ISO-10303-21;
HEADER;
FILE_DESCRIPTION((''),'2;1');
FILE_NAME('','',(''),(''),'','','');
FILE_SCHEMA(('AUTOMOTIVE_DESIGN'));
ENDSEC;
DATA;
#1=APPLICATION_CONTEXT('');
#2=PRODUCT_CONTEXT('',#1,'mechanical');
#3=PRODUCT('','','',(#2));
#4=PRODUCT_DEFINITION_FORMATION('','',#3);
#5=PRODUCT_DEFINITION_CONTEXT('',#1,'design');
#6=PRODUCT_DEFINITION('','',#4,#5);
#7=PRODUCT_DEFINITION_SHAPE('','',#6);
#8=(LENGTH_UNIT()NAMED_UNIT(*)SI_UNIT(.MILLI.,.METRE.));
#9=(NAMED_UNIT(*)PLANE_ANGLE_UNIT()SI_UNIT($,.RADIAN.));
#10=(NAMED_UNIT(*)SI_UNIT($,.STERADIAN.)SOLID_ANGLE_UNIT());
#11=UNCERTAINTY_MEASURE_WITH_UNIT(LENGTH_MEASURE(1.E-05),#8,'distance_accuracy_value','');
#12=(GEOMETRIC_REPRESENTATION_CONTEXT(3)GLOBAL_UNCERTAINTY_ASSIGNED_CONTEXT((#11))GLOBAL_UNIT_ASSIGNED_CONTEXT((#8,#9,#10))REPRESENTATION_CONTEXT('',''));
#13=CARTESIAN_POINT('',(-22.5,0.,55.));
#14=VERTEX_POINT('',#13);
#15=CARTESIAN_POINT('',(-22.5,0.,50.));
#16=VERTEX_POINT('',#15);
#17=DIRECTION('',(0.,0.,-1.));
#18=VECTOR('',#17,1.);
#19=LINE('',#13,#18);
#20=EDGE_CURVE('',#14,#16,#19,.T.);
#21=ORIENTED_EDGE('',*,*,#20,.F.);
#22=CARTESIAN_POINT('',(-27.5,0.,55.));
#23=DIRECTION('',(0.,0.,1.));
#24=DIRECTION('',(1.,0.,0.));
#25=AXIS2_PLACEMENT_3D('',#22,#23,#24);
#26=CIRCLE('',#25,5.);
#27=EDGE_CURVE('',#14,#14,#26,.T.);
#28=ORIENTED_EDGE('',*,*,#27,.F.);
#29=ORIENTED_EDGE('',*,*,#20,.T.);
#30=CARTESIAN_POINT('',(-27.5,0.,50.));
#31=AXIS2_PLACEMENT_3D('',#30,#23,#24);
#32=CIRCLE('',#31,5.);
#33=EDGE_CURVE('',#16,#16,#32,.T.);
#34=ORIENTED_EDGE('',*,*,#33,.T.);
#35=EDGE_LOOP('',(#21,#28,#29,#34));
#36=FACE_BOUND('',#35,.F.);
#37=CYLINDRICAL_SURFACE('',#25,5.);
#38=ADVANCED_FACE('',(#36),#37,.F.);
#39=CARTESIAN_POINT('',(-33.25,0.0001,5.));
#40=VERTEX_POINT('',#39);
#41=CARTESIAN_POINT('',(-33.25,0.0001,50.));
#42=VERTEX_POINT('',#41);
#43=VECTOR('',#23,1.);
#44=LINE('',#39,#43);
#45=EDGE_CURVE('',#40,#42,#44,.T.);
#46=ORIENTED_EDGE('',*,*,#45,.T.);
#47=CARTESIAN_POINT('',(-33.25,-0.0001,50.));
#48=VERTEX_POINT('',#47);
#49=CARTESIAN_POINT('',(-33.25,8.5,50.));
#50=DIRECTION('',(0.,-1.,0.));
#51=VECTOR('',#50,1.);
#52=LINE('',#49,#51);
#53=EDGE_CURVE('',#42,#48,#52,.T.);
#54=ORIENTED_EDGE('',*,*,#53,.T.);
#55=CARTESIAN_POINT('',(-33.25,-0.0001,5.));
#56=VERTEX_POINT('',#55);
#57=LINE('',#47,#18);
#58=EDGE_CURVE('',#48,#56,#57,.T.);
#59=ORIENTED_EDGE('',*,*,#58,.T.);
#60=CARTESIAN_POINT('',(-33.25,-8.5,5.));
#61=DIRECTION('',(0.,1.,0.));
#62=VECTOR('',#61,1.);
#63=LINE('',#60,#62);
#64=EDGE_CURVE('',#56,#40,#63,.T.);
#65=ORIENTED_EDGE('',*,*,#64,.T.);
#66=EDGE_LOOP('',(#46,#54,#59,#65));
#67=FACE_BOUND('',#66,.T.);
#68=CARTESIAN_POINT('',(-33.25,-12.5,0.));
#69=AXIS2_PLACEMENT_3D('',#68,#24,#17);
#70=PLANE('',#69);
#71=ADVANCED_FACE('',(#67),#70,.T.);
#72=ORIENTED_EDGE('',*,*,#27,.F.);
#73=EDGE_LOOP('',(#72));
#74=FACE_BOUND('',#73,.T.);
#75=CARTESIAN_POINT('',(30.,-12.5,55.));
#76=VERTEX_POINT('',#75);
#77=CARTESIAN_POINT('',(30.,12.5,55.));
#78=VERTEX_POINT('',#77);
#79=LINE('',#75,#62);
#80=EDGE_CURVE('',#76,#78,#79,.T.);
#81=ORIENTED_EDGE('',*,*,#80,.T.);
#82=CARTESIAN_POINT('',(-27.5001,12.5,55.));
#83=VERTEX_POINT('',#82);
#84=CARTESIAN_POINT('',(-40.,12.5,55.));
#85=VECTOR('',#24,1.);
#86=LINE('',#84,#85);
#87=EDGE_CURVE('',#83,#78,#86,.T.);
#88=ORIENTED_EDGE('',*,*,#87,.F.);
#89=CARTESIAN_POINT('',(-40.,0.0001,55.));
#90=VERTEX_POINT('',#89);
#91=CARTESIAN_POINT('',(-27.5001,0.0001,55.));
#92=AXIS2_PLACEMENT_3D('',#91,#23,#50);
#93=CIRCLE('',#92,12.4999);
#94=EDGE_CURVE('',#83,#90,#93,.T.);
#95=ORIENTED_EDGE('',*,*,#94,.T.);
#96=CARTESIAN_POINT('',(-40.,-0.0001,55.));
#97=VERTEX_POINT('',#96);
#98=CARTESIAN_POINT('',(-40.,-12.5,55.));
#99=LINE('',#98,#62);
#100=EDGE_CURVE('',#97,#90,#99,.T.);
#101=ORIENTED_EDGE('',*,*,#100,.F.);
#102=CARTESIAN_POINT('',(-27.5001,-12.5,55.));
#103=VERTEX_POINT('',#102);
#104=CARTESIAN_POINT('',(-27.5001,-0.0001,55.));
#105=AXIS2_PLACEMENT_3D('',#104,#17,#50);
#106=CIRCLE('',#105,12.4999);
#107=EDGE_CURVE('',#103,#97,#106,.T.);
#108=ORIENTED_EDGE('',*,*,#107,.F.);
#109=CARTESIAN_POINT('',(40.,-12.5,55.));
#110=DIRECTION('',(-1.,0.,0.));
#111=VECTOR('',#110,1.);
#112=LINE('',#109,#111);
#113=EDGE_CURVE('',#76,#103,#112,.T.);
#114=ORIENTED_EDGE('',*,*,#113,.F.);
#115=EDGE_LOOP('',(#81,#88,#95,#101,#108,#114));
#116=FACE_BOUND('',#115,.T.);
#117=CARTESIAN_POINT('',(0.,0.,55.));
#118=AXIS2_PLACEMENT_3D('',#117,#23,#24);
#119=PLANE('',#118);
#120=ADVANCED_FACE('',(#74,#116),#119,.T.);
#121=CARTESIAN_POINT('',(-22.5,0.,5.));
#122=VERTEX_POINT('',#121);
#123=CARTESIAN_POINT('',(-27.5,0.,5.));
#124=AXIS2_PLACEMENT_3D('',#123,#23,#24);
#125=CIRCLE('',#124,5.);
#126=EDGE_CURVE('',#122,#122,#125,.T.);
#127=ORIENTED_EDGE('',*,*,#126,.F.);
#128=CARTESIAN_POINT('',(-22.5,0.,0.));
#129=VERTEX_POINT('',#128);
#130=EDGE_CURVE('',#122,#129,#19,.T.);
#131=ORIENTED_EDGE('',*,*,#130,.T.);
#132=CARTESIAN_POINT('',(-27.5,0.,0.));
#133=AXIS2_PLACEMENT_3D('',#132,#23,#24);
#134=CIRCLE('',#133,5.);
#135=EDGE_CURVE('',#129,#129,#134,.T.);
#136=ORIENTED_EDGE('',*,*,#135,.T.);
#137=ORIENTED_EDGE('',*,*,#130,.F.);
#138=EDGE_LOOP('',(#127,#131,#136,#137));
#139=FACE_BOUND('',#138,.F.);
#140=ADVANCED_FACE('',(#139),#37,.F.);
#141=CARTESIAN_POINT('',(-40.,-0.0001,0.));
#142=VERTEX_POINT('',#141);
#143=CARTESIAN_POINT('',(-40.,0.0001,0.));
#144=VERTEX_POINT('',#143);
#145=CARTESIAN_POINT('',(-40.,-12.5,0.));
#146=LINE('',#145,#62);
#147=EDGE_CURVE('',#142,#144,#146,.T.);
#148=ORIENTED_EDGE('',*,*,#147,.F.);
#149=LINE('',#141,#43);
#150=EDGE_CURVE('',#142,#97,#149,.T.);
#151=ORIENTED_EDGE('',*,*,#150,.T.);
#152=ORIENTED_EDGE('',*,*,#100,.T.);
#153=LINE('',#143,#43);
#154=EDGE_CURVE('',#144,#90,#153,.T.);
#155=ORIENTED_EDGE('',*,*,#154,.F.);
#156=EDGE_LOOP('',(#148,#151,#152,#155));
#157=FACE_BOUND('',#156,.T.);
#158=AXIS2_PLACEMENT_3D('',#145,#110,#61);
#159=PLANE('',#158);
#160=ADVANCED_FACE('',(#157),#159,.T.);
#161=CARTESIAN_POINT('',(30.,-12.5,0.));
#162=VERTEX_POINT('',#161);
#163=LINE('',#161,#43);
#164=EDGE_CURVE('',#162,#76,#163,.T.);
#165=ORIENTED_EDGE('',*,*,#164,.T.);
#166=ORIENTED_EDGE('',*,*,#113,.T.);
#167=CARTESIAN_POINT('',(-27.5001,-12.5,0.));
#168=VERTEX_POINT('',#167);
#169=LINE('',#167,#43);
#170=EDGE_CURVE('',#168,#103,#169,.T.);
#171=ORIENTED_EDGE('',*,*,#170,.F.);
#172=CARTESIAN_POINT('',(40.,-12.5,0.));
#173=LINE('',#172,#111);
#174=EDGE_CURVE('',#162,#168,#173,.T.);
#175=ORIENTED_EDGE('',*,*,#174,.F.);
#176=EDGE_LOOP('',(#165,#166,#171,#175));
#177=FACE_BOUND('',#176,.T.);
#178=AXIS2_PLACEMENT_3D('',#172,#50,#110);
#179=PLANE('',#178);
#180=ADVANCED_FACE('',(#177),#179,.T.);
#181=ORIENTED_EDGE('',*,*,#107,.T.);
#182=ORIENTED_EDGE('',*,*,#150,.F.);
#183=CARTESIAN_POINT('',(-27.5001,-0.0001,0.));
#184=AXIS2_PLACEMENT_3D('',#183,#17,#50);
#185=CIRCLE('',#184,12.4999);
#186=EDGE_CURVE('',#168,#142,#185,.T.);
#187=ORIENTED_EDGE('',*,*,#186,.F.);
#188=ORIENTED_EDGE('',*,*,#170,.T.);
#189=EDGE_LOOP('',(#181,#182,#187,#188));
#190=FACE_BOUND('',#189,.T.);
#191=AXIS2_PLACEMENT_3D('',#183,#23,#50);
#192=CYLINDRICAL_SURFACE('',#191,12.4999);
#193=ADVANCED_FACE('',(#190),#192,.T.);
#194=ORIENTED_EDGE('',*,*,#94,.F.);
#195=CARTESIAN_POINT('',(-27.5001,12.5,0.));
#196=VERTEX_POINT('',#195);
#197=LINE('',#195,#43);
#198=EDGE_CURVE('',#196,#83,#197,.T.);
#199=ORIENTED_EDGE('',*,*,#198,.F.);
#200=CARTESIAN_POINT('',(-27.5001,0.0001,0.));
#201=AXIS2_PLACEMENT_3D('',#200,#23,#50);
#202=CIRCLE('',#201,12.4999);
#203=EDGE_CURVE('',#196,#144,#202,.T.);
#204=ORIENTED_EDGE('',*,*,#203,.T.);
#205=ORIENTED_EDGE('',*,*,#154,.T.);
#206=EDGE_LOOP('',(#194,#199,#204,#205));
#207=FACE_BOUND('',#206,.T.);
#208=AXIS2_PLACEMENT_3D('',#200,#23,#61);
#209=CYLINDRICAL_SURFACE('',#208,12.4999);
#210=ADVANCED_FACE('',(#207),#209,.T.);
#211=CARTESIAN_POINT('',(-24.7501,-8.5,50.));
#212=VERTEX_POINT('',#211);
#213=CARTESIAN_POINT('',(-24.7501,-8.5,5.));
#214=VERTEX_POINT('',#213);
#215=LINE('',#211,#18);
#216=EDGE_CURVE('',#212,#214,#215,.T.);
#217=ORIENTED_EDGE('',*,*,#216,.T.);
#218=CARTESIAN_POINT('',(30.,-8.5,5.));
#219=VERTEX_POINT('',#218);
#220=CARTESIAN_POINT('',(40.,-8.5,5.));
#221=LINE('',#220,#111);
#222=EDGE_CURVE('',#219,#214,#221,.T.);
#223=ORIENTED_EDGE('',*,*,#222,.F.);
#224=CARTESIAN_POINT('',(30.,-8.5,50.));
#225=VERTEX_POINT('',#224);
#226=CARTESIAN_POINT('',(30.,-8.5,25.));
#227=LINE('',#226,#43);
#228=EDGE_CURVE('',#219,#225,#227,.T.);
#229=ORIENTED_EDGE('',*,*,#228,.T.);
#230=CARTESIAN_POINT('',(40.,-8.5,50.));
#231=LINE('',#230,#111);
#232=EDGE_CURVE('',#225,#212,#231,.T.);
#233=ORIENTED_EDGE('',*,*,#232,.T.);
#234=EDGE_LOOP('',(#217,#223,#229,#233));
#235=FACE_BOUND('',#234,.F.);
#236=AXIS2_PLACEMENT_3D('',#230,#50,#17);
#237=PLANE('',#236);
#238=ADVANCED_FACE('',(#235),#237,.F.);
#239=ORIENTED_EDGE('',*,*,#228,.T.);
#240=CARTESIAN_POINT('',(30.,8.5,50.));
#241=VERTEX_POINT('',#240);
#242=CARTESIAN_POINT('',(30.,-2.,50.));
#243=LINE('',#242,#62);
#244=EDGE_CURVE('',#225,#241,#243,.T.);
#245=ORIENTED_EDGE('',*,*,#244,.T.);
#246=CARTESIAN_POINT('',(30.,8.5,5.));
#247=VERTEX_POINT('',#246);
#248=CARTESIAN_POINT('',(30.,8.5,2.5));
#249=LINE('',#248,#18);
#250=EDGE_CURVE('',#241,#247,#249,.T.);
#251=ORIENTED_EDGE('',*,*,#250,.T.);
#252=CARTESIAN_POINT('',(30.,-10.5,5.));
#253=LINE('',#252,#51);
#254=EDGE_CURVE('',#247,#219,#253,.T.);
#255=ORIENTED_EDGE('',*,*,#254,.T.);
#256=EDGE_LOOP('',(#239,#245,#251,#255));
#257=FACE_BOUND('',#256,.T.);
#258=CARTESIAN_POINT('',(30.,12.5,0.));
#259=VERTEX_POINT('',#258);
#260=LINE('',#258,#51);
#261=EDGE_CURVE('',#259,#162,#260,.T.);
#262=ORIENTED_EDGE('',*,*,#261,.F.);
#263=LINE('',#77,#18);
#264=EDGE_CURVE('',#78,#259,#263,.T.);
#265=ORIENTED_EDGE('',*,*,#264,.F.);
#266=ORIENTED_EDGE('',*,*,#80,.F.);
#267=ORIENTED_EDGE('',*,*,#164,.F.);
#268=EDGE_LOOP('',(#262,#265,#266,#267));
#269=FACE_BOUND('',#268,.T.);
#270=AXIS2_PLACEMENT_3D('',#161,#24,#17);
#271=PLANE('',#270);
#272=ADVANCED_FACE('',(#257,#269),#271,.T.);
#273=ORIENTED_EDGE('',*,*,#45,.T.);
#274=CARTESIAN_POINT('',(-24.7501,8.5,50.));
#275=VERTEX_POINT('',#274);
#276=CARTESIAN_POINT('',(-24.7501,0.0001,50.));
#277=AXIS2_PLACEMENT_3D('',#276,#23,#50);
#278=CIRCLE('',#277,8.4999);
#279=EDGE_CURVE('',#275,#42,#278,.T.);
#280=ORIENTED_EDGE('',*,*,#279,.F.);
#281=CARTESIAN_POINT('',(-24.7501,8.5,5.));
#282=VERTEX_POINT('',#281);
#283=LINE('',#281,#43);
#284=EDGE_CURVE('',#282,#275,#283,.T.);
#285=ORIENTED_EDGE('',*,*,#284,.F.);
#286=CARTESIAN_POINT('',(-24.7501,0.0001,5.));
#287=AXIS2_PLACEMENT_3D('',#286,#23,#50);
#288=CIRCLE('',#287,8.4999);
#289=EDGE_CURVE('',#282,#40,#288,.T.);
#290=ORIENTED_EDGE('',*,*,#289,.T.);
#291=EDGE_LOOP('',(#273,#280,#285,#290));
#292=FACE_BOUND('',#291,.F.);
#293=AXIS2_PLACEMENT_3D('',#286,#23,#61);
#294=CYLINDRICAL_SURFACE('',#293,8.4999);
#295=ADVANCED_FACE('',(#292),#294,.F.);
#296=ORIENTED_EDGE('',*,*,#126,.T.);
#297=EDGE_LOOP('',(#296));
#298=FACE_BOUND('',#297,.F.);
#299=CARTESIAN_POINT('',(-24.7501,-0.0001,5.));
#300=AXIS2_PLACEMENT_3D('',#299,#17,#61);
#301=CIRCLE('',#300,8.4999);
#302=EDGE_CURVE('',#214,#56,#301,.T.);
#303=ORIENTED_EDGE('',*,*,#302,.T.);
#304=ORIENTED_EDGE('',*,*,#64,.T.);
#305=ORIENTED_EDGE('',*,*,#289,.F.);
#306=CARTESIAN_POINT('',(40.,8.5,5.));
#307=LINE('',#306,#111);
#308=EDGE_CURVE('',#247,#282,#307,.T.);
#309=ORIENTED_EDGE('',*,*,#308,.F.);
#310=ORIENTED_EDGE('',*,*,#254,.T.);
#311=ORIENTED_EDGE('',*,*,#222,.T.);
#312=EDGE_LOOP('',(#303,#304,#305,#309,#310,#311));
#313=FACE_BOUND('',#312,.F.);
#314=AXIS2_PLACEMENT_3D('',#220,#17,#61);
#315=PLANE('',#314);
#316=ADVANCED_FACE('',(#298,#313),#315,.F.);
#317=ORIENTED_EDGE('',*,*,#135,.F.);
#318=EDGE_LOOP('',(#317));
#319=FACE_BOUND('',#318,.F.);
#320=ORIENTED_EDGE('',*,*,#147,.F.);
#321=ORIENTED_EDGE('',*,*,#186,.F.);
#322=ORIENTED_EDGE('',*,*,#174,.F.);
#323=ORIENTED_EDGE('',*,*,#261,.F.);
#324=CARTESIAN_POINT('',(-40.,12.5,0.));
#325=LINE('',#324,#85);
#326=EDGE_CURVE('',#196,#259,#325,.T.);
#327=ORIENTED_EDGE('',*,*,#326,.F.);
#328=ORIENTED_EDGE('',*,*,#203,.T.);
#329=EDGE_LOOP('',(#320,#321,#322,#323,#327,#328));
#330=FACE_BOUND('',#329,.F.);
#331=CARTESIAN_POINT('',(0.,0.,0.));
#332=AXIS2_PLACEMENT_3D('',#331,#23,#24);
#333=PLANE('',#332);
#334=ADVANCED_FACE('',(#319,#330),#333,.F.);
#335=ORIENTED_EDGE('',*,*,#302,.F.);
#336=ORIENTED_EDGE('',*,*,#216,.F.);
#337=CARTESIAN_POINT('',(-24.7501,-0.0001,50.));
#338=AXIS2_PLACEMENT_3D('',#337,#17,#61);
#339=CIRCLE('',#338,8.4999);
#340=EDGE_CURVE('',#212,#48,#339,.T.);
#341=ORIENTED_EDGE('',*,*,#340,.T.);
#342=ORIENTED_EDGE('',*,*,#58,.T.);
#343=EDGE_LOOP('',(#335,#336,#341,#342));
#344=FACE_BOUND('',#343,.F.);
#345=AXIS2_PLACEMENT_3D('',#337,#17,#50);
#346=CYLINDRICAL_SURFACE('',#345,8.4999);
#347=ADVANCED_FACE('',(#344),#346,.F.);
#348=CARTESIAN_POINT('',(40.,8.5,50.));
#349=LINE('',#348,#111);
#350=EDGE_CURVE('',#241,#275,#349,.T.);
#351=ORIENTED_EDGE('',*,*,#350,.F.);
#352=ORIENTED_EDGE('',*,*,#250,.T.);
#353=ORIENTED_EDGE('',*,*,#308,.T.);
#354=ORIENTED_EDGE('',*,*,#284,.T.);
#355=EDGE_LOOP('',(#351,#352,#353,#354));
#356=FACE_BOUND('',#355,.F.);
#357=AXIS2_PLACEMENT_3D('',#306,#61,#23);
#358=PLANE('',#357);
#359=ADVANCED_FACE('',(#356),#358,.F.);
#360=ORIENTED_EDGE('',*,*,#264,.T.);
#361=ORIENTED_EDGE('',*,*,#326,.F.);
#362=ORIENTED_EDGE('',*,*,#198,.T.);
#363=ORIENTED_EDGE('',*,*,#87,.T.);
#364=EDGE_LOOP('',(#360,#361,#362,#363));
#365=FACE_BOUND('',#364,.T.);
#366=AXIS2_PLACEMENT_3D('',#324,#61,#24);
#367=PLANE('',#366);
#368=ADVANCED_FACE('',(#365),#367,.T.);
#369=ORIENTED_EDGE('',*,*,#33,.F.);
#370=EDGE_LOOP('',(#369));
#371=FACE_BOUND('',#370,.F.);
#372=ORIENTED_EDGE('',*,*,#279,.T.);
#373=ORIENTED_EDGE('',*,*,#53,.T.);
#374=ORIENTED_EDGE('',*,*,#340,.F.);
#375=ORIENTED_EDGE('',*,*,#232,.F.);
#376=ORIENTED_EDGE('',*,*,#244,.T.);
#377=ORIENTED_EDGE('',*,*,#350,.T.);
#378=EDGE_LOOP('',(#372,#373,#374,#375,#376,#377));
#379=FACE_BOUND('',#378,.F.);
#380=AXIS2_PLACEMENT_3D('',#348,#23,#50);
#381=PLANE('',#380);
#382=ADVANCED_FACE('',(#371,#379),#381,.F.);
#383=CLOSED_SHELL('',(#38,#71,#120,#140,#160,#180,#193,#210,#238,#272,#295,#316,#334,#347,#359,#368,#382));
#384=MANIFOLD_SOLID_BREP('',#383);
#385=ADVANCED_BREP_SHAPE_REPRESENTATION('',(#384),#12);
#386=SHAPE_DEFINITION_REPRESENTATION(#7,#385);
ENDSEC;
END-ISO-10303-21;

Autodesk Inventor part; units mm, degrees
ref_plane "YZ Plane" through (0, 0, 0) normal (1, 0, 0) x (0, 1, 0)
ref_plane "XZ Plane" through (0, 0, 0) normal (0, 1, 0) x (-1, 0, 0)
ref_plane "XY Plane" through (0, 0, 0) normal (0, 0, 1) x (1, 0, 0)
sketch "Sketch1" plane through (0, 0, 0) normal (0, 0, 1) x (1, 0, 0)
  line L0 (-40, 12.5) -> (40, 12.5)
  line L1 (40, 12.5) -> (40, -12.5)
  line L2 (40, -12.5) -> (-40, -12.5)
  line L3 (-40, -12.5) -> (-40, 12.5)
  line L4 (-40, 12.5) -> (40, -12.5) construction
  line L5 (40, 12.5) -> (-40, -12.5) construction
  point P0 (0, 0)
  dimension "d0" = 80
  dimension "d1" = 25
extrude "Extrusion1" add sketch "Sketch1" along normal blind 55
sketch "Sketch2" plane through (0, 0, 55) normal (0, 0, 1) x (1, 0, 0)
  circle A0 centre (-27.5, 0) radius 5
  line L0 (-40, 12.5) -> (-40, -12.5) projected
  point P0 (0, 0)
  dimension "d4" = 10
  dimension "d5" = 12.5
extrude "Extrusion2" cut sketch "Sketch2" against normal through all
sketch "Sketch3" plane through (40, -12.5, 0) normal (1, 0, 0) x (0, 0, -1)
  line L0 (-50, 4) -> (-5, 4)
  line L1 (-5, 4) -> (-5, 21)
  line L2 (-5, 21) -> (-50, 21)
  line L3 (-50, 21) -> (-50, 4)
  line L4 (-50, 4) -> (-5, 21) construction
  line L5 (-5, 4) -> (-50, 21) construction
  line L6 (-55, 0) -> (-55, 25) projected
  line L7 (0, 25) -> (-55, 25) projected
  point P0 (0, 12.5)
  point P1 (-27.5, 12.5)
  dimension "d8" = 45
  dimension "d9" = 17
  dimension "d10" = 27.5
  dimension "d11" = 12.5
extrude "Extrusion3" cut sketch "Sketch3" against normal blind 73.25
full round fillet "Full Round Fillet1" first side at (15.5833, 8.5, 20) centre faces at (-33.25, -2.8333, 20) second side at (15.5833, -8.5, 35)
fillet "Fillet1" radius 12.5 2 edges at (-40, 12.5, 27.5) (-40, -12.5, 27.5)
sketch "Sketch4" plane through (40, -12.5, 0) normal (1, 0, 0) x (0, 0, -1)
  line L0 (-55, 0) -> (-55, 25) projected
  line L1 (0, 0) -> (-55, 0) projected
  line L2 (-55, 25) -> (0, 25)
  line L3 (0, 25) -> (0, 0)
  line L4 (0, 0) -> (-55, 0)
  line L5 (-55, 0) -> (-55, 25)
  point P0 (0, 12.5)
extrude "Extrusion4" cut sketch "Sketch4" against normal blind 10
properties part number "2nd arm"
